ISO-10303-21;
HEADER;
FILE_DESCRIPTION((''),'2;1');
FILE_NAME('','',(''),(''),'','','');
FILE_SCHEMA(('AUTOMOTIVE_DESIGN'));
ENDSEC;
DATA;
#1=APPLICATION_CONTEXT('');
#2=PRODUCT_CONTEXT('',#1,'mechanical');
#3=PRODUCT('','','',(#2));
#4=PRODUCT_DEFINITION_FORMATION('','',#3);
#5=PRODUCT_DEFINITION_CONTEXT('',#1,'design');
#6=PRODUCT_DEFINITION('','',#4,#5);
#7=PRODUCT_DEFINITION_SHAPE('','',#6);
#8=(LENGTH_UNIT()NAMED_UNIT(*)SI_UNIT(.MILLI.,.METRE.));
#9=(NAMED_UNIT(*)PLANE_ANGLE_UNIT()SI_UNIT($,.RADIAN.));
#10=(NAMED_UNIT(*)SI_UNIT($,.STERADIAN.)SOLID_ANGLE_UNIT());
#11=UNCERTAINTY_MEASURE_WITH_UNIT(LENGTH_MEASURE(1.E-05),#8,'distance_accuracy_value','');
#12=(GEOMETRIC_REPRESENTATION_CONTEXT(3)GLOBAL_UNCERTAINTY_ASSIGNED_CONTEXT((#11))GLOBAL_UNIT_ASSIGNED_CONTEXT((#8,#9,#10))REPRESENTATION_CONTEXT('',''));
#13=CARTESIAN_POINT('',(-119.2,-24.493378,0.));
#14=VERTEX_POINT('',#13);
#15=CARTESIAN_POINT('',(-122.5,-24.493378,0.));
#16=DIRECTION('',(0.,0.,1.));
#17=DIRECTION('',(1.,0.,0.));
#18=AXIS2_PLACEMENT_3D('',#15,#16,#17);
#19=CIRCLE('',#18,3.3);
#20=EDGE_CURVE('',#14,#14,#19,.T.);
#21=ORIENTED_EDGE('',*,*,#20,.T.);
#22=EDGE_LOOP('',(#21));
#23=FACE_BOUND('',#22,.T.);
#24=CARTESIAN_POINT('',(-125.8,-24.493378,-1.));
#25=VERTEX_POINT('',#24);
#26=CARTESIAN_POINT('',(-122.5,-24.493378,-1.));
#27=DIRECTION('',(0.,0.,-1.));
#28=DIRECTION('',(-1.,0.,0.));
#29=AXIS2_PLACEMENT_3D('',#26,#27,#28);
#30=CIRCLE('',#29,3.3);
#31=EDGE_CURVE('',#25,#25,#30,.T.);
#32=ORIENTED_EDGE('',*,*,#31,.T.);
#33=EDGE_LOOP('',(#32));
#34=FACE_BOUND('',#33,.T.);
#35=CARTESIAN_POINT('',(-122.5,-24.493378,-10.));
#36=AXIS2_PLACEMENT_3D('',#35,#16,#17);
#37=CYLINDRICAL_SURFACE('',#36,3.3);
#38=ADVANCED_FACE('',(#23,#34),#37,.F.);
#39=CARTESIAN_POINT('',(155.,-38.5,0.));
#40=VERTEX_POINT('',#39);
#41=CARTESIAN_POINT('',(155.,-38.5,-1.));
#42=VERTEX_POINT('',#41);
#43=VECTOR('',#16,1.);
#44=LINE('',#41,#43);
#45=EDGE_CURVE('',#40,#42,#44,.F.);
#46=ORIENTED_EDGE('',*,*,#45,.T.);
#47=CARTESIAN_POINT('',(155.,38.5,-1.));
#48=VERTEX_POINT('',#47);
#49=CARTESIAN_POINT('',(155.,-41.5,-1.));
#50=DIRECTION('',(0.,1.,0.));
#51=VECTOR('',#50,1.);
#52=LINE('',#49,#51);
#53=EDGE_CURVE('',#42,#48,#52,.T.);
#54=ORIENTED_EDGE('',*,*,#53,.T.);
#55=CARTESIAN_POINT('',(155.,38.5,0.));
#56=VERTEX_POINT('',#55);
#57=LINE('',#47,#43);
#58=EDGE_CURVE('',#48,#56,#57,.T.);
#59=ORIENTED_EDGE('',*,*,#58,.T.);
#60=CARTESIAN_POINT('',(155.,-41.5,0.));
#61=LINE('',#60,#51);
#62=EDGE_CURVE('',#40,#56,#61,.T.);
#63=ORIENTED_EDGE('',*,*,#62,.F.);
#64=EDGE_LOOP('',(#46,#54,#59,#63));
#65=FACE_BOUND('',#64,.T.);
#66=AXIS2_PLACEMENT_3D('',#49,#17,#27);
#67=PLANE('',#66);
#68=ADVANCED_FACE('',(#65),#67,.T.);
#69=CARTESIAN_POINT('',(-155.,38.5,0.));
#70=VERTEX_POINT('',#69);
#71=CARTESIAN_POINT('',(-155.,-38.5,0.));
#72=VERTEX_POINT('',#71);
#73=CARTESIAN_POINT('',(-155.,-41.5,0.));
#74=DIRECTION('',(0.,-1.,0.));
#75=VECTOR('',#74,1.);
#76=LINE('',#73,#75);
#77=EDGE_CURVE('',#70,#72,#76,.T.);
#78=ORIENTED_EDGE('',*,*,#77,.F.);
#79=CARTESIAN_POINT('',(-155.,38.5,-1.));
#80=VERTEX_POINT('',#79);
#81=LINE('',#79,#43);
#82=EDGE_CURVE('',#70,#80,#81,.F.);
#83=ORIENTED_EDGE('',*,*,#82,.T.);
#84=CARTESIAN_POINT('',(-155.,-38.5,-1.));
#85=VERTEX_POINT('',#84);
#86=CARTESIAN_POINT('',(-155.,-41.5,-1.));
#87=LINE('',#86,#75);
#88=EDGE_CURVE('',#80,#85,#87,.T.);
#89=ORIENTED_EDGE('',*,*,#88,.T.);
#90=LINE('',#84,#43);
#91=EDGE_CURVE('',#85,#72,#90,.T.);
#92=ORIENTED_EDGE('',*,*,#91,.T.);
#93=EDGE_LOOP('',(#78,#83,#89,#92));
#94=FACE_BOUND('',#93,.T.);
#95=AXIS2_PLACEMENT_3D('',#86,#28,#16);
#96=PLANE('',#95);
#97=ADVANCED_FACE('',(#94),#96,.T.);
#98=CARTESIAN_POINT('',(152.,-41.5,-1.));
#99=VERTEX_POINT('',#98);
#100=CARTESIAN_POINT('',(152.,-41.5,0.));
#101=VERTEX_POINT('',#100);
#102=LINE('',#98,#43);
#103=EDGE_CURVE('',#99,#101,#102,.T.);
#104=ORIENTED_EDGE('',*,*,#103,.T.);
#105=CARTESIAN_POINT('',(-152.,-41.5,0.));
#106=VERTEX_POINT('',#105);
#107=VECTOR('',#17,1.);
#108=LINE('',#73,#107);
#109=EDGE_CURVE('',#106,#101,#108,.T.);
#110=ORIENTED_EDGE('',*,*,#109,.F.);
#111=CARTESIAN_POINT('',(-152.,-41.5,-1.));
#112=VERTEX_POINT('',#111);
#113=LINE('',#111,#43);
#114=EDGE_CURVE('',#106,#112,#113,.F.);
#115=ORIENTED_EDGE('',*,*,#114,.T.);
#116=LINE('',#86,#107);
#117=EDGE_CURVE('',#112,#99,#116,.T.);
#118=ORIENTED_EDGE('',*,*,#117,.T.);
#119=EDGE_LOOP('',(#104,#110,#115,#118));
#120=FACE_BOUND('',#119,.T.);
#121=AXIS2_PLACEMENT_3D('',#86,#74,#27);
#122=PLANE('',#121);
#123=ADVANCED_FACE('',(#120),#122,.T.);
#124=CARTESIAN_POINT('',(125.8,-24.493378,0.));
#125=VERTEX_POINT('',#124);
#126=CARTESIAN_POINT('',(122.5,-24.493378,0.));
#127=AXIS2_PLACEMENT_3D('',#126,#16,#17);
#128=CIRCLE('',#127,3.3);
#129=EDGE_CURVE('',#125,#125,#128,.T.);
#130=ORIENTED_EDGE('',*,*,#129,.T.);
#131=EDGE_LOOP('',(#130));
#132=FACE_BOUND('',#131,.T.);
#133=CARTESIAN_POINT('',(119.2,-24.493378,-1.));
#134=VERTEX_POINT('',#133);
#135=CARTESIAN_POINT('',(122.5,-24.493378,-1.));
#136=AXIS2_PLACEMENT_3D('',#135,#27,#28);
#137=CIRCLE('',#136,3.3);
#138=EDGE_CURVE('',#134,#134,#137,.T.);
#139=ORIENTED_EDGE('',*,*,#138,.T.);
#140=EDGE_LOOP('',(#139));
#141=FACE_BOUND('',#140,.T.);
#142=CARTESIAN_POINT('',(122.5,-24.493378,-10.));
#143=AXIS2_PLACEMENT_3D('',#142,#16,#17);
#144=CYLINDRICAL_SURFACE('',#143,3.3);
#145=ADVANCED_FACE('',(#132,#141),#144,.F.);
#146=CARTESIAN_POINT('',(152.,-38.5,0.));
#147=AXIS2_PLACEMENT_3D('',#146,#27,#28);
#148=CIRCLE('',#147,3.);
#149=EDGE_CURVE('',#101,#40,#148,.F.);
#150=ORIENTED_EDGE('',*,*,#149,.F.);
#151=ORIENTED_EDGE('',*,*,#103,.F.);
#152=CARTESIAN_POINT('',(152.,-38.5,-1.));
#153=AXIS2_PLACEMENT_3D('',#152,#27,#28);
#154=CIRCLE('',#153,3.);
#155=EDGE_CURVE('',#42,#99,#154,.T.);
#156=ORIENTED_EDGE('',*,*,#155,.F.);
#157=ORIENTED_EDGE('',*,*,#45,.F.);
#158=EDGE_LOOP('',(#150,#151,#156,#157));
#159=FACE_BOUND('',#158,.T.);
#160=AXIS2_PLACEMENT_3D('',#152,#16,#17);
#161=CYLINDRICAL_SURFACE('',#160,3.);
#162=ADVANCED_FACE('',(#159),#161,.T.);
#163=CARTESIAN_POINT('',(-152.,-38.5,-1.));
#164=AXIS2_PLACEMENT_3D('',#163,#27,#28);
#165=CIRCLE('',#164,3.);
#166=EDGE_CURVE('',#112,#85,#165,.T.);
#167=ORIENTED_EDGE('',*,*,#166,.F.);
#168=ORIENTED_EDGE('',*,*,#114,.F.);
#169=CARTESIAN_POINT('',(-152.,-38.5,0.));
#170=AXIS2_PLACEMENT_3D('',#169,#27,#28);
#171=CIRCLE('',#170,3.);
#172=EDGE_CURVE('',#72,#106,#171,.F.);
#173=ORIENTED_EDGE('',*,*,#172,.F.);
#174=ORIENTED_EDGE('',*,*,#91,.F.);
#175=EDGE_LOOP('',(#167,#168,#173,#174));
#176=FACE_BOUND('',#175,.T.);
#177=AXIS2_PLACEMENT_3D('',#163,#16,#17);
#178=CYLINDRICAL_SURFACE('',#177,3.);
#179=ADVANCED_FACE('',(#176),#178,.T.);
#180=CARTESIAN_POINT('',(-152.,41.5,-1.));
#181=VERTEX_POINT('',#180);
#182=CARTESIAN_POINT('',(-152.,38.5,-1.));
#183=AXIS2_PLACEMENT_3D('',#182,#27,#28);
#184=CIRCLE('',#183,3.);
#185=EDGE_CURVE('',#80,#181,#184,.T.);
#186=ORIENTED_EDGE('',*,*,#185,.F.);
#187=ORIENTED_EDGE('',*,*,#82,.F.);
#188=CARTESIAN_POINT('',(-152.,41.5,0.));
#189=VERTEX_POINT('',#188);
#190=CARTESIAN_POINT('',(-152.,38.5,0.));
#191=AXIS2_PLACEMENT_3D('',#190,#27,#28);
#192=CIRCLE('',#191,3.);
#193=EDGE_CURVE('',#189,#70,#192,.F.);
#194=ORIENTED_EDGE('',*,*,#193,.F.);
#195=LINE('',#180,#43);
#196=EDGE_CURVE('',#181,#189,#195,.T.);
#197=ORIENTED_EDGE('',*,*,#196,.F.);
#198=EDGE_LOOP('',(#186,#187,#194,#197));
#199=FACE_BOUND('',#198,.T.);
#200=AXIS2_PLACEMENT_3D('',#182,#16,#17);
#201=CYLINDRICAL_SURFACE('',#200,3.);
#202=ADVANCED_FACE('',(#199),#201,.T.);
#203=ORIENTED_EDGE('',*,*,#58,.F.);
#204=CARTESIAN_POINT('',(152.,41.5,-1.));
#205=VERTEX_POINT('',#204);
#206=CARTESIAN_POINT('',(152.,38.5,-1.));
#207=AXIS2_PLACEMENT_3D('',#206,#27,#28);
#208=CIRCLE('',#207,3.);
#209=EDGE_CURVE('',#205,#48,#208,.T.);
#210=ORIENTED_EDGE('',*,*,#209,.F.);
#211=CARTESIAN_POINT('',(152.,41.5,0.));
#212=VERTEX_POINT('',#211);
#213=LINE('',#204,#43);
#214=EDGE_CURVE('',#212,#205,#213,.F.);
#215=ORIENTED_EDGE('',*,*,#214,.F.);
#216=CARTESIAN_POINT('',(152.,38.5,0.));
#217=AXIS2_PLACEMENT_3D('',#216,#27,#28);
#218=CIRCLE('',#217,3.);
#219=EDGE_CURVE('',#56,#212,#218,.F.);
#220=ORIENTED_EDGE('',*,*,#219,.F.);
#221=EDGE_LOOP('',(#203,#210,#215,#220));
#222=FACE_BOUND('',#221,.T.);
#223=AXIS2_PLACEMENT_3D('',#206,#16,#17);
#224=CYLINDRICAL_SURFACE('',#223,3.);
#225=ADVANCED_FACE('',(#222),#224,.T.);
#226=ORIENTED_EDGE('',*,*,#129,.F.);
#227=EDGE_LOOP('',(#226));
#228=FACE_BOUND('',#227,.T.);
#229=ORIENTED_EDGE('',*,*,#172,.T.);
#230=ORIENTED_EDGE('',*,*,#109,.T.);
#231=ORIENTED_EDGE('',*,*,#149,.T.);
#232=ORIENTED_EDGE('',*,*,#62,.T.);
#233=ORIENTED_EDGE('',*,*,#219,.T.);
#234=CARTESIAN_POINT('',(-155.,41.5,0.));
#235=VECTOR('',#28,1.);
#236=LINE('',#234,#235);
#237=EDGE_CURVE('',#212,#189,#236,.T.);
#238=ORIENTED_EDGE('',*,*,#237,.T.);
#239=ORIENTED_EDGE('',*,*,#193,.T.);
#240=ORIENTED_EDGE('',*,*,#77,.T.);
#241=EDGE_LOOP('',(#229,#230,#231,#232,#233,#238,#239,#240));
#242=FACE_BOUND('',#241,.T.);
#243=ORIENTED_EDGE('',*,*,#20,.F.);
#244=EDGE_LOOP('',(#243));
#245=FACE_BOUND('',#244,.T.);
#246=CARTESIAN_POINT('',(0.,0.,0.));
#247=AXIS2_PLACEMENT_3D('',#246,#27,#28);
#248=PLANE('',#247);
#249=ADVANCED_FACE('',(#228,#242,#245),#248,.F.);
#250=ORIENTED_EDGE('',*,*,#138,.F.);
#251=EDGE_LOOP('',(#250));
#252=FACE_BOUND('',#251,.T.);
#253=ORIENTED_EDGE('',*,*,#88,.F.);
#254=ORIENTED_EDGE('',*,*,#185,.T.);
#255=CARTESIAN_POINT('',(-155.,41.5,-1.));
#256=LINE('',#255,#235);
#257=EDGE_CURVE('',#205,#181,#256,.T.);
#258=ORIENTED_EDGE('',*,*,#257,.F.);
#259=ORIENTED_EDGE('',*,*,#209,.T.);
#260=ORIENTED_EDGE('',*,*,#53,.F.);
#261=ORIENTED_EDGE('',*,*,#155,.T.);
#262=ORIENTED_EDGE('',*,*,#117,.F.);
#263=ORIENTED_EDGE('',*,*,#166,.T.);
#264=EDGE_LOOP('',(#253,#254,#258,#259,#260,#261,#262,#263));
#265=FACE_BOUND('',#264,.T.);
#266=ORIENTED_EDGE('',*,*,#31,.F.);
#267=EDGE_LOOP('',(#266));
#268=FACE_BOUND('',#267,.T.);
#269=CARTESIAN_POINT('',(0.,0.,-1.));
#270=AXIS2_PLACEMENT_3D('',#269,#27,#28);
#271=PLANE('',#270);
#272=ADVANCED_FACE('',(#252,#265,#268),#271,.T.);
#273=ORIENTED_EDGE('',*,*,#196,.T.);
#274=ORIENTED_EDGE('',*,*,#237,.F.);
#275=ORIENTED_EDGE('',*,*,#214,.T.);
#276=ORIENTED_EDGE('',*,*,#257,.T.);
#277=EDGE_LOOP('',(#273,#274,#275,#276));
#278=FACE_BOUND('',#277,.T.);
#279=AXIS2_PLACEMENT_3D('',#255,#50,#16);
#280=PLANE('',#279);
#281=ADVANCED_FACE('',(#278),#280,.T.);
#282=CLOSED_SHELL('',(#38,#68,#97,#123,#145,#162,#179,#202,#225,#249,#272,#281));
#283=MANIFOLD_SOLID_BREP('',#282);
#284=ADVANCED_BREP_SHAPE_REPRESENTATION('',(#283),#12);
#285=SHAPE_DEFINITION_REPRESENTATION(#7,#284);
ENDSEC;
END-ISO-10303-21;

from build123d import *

# Parameters (mm, degrees)
SKETCH1_W          = 310
SKETCH1_H          = 83
BASE_FLANGE1_DEPTH = 1
FILLET1_R          = 3
SKETCH6_R          = 3.3
CUT_EXTRUDE1_DEPTH = 10


# Sheet-metal steps are written as plain solids
with BuildPart() as part:
    # Sketch1 → Base-Flange1 (new body)
    with BuildSketch(Plane.XY):
        Rectangle(SKETCH1_W, SKETCH1_H)
    extrude(amount=-BASE_FLANGE1_DEPTH)

    # Fillet1
    fillet1_edges = [part.edges().sort_by_distance(p)[0] for p in [
        (155, -41.5, -0.5),
        (-155, -41.5, -0.5),
        (-155, 41.5, -0.5),
        (155, 41.5, -0.5),
    ]]
    fillet(fillet1_edges, radius=FILLET1_R)

    # Sketch6 → Cut-Extrude1 (cut)
    with BuildSketch(Plane.XY):
        with Locations((122.5, -24.493378468)):
            Circle(SKETCH6_R)
        with Locations((-122.5, -24.493378468)):
            Circle(SKETCH6_R)
    extrude(amount=-CUT_EXTRUDE1_DEPTH, mode=Mode.SUBTRACT)


solid = part.part
